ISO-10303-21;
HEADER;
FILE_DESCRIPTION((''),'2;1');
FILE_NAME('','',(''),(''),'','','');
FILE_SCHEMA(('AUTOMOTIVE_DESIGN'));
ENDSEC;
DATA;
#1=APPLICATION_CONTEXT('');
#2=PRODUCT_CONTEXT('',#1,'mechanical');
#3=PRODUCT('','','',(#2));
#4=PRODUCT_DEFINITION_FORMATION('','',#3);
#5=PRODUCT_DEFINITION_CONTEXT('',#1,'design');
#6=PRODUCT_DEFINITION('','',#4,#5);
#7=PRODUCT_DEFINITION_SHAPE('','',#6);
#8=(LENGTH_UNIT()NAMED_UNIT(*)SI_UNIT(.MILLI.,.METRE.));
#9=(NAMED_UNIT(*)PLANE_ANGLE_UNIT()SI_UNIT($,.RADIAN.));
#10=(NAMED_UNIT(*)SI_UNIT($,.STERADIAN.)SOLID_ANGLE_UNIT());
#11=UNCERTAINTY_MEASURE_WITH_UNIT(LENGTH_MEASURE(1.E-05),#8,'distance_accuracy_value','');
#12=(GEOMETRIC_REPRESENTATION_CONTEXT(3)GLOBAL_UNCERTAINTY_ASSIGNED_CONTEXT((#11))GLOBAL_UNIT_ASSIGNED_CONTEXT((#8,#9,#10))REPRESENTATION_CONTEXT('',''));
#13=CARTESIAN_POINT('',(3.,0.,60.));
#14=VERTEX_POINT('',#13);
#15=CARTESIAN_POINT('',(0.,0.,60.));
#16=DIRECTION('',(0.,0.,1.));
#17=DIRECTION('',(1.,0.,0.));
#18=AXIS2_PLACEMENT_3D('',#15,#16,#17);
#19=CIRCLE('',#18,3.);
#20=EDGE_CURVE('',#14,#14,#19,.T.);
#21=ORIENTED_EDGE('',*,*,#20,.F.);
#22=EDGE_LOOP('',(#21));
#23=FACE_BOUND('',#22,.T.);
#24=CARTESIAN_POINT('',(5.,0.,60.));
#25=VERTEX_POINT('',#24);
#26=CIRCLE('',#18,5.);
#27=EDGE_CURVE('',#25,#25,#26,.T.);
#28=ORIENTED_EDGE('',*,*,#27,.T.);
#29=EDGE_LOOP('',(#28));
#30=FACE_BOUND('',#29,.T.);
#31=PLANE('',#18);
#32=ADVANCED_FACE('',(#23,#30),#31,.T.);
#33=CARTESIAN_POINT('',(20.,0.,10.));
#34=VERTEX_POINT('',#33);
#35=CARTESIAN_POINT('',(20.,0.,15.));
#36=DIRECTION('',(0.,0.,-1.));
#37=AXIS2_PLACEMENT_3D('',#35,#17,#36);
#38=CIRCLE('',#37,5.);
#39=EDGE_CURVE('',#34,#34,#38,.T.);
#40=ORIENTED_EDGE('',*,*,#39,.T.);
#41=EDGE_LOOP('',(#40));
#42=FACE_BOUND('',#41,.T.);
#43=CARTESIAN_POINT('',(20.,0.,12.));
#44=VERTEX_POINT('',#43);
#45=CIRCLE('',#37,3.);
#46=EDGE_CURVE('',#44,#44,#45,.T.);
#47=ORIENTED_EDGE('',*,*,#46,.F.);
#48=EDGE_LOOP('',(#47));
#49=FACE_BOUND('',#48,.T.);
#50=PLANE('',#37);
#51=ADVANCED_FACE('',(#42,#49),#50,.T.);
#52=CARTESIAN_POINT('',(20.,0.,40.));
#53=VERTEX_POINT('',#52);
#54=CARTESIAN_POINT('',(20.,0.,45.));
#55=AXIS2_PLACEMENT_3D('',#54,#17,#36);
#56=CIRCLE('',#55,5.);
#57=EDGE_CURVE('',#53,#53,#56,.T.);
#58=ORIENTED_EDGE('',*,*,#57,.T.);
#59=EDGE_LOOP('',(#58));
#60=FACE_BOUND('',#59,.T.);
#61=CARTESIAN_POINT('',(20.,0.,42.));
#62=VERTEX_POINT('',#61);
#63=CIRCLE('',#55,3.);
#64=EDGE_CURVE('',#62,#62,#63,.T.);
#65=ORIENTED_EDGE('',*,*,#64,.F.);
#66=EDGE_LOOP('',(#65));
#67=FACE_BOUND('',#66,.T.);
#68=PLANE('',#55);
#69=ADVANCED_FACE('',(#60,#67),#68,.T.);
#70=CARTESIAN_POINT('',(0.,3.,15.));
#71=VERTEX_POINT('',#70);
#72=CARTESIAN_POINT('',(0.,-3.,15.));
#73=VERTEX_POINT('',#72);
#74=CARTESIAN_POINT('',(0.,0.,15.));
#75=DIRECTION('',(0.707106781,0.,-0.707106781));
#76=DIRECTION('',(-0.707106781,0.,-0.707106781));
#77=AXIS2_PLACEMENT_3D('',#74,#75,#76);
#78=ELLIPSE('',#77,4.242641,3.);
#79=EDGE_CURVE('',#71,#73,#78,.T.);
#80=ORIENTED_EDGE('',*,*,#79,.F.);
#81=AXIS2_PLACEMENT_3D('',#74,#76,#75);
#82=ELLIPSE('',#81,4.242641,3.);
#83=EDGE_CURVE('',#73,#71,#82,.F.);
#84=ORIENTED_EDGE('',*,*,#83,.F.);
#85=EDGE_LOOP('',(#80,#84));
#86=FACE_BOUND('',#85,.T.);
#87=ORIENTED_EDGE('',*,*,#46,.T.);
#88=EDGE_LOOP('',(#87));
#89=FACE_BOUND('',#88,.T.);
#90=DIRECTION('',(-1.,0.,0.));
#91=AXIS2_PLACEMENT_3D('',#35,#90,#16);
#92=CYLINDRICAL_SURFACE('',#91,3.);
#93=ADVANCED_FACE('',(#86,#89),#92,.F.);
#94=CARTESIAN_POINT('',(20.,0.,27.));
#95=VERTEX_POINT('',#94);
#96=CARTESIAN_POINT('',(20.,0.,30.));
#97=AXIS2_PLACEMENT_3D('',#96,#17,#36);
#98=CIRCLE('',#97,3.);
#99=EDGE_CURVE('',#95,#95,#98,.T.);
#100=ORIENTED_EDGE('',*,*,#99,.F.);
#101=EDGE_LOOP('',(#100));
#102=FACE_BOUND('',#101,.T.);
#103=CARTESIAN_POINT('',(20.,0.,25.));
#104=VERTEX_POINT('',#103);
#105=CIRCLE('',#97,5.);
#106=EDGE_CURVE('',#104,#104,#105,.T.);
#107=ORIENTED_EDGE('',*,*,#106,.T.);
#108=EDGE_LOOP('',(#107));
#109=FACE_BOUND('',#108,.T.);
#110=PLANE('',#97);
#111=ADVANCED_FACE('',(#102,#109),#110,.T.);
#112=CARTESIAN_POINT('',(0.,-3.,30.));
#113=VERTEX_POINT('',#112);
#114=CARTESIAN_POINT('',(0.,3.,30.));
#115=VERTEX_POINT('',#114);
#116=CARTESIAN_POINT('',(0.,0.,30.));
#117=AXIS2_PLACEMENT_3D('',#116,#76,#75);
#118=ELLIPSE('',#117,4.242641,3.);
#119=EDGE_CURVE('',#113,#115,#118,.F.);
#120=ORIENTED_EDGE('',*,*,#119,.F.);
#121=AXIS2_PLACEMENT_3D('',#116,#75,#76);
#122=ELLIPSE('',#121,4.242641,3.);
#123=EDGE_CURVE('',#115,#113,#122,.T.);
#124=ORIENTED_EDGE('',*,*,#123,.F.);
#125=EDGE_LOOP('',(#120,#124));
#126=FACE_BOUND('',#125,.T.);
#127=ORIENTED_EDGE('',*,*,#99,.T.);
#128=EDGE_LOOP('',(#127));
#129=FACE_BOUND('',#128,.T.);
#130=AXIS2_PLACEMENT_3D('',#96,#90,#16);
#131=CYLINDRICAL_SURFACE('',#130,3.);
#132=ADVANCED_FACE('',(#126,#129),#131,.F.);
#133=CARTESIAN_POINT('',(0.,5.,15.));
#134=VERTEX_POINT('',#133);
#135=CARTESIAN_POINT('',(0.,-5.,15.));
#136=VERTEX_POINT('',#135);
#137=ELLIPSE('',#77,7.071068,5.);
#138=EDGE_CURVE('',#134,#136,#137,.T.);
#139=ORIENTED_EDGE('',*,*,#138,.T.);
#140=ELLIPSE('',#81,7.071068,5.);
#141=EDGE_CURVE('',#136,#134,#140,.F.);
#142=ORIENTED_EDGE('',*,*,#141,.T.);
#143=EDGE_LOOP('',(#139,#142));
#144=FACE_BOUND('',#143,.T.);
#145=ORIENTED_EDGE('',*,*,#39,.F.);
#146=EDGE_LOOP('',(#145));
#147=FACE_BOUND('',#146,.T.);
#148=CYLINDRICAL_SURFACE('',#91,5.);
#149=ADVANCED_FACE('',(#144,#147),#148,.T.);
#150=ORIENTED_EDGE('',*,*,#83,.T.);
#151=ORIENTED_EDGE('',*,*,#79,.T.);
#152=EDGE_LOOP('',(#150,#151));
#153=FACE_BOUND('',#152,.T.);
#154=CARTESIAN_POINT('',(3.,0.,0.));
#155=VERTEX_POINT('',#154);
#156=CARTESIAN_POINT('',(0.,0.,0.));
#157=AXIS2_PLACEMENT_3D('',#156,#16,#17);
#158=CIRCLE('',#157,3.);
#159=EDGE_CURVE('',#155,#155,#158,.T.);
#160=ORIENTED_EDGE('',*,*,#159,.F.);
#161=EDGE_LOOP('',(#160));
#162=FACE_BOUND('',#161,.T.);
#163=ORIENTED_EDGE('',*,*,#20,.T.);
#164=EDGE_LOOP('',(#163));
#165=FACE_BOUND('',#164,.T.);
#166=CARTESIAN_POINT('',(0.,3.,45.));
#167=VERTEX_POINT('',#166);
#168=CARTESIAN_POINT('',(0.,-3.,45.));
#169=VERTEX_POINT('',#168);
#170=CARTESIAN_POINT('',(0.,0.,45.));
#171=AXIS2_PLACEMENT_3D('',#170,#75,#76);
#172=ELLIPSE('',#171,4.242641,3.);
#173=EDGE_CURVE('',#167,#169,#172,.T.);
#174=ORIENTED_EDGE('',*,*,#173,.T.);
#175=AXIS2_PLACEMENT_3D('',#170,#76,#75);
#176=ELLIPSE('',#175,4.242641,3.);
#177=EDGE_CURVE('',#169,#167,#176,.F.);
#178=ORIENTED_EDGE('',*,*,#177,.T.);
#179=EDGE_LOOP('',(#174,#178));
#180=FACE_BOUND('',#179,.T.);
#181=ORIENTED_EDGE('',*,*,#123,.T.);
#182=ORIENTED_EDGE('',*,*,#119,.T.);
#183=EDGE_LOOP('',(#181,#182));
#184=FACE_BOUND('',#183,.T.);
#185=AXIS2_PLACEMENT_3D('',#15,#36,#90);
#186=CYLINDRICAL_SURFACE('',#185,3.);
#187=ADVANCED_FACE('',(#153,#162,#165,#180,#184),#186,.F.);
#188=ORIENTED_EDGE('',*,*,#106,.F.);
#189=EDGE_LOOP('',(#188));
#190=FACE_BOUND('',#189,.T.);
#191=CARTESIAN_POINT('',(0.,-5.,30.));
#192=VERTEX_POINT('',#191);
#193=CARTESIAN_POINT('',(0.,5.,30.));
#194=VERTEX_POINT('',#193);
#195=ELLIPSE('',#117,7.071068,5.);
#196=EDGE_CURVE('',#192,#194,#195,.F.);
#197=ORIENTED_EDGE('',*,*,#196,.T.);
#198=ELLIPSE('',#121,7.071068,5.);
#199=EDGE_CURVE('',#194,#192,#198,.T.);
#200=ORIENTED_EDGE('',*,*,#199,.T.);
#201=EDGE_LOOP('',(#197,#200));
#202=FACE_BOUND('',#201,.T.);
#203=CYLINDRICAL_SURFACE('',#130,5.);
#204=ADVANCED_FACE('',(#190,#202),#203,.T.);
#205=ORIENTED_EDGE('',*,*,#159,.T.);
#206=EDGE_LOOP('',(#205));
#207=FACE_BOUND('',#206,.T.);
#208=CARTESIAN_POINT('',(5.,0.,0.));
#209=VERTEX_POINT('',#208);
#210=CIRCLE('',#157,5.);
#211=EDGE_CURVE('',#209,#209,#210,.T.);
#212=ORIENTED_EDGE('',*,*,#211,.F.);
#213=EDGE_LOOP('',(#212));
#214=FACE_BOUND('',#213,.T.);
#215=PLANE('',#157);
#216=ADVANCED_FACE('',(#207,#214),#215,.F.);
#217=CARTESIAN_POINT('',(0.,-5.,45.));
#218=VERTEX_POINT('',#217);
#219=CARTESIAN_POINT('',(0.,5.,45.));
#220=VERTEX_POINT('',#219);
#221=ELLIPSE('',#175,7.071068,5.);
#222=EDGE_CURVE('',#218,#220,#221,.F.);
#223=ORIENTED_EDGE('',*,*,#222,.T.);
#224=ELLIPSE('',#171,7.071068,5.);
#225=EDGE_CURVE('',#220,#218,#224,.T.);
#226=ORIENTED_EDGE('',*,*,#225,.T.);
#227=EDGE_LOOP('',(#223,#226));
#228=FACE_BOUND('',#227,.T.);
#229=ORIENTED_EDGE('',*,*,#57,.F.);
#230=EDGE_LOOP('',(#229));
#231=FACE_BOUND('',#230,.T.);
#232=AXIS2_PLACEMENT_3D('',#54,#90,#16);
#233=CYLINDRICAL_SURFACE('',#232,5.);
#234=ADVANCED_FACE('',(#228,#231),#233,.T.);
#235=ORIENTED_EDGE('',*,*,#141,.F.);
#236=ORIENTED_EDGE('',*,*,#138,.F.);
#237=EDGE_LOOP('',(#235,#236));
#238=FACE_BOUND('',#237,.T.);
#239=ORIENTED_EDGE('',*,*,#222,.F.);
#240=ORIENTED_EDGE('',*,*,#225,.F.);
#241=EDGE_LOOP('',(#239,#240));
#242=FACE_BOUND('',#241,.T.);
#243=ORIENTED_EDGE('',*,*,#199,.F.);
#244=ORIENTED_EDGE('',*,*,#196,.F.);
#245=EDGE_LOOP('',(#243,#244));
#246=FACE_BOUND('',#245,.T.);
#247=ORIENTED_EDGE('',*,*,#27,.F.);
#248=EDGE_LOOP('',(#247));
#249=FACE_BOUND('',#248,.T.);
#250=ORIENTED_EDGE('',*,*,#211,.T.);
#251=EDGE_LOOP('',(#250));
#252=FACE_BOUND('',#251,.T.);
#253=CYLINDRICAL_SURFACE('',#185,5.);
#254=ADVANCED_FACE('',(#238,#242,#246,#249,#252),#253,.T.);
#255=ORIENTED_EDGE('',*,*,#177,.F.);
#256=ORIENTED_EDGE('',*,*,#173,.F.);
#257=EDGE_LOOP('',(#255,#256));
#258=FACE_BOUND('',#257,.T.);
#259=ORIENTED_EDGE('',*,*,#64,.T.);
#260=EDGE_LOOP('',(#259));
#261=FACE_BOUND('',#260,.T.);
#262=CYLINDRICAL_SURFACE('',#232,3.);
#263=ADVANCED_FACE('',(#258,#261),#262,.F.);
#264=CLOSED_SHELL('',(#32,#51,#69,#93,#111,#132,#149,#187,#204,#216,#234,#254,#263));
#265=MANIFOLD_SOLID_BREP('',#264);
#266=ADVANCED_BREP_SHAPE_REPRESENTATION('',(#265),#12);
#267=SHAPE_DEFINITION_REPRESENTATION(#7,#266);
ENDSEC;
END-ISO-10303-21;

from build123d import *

# Parameters (mm, degrees)
ESQUISSE1_R        = 5
BOSS_EXTRU_1_DEPTH = 60
ESQUISSE2_R        = 5
BOSS_EXTRU_2_DEPTH = 20
COQUE1_START       = -1e-07
COQUE1_OUTLINE_R   = 3
COQUE1_DEPTH       = 20.0000001
COQUE1_2_OUTLINE_R = 3
COQUE1_2_DEPTH     = 60


with BuildPart() as part:
    # Esquisse1 → Boss.-Extru.1 (new body)
    with BuildSketch(Plane.XY):
        Circle(ESQUISSE1_R)
    extrude(amount=BOSS_EXTRU_1_DEPTH)

    # Esquisse2 → Boss.-Extru.2 (add)
    with BuildSketch(Plane(origin=(0, 0, 0), x_dir=(0, 0, -1), z_dir=(1, 0, 0))):
        with Locations((-15, 0)):
            Circle(ESQUISSE2_R)
        with Locations((-30, 0)):
            Circle(ESQUISSE2_R)
        with Locations((-45, 0)):
            Circle(ESQUISSE2_R)
    extrude(amount=BOSS_EXTRU_2_DEPTH)

    # Coque1: read off the stored shape, not the designer's step
    # Coque1 outline → Coque1 (cut)
    with BuildSketch(Plane.YZ.offset(COQUE1_START)):
        with Locations((0, 15)):
            Circle(COQUE1_OUTLINE_R)
        with Locations((0, 30)):
            Circle(COQUE1_OUTLINE_R)
        with Locations((0, 45)):
            Circle(COQUE1_OUTLINE_R)
    extrude(amount=COQUE1_DEPTH, mode=Mode.SUBTRACT)

    # Coque1 2 outline → Coque1 2 (cut)
    with BuildSketch(Plane.XY):
        Circle(COQUE1_2_OUTLINE_R)
    extrude(amount=COQUE1_2_DEPTH, mode=Mode.SUBTRACT)


solid = part.part
